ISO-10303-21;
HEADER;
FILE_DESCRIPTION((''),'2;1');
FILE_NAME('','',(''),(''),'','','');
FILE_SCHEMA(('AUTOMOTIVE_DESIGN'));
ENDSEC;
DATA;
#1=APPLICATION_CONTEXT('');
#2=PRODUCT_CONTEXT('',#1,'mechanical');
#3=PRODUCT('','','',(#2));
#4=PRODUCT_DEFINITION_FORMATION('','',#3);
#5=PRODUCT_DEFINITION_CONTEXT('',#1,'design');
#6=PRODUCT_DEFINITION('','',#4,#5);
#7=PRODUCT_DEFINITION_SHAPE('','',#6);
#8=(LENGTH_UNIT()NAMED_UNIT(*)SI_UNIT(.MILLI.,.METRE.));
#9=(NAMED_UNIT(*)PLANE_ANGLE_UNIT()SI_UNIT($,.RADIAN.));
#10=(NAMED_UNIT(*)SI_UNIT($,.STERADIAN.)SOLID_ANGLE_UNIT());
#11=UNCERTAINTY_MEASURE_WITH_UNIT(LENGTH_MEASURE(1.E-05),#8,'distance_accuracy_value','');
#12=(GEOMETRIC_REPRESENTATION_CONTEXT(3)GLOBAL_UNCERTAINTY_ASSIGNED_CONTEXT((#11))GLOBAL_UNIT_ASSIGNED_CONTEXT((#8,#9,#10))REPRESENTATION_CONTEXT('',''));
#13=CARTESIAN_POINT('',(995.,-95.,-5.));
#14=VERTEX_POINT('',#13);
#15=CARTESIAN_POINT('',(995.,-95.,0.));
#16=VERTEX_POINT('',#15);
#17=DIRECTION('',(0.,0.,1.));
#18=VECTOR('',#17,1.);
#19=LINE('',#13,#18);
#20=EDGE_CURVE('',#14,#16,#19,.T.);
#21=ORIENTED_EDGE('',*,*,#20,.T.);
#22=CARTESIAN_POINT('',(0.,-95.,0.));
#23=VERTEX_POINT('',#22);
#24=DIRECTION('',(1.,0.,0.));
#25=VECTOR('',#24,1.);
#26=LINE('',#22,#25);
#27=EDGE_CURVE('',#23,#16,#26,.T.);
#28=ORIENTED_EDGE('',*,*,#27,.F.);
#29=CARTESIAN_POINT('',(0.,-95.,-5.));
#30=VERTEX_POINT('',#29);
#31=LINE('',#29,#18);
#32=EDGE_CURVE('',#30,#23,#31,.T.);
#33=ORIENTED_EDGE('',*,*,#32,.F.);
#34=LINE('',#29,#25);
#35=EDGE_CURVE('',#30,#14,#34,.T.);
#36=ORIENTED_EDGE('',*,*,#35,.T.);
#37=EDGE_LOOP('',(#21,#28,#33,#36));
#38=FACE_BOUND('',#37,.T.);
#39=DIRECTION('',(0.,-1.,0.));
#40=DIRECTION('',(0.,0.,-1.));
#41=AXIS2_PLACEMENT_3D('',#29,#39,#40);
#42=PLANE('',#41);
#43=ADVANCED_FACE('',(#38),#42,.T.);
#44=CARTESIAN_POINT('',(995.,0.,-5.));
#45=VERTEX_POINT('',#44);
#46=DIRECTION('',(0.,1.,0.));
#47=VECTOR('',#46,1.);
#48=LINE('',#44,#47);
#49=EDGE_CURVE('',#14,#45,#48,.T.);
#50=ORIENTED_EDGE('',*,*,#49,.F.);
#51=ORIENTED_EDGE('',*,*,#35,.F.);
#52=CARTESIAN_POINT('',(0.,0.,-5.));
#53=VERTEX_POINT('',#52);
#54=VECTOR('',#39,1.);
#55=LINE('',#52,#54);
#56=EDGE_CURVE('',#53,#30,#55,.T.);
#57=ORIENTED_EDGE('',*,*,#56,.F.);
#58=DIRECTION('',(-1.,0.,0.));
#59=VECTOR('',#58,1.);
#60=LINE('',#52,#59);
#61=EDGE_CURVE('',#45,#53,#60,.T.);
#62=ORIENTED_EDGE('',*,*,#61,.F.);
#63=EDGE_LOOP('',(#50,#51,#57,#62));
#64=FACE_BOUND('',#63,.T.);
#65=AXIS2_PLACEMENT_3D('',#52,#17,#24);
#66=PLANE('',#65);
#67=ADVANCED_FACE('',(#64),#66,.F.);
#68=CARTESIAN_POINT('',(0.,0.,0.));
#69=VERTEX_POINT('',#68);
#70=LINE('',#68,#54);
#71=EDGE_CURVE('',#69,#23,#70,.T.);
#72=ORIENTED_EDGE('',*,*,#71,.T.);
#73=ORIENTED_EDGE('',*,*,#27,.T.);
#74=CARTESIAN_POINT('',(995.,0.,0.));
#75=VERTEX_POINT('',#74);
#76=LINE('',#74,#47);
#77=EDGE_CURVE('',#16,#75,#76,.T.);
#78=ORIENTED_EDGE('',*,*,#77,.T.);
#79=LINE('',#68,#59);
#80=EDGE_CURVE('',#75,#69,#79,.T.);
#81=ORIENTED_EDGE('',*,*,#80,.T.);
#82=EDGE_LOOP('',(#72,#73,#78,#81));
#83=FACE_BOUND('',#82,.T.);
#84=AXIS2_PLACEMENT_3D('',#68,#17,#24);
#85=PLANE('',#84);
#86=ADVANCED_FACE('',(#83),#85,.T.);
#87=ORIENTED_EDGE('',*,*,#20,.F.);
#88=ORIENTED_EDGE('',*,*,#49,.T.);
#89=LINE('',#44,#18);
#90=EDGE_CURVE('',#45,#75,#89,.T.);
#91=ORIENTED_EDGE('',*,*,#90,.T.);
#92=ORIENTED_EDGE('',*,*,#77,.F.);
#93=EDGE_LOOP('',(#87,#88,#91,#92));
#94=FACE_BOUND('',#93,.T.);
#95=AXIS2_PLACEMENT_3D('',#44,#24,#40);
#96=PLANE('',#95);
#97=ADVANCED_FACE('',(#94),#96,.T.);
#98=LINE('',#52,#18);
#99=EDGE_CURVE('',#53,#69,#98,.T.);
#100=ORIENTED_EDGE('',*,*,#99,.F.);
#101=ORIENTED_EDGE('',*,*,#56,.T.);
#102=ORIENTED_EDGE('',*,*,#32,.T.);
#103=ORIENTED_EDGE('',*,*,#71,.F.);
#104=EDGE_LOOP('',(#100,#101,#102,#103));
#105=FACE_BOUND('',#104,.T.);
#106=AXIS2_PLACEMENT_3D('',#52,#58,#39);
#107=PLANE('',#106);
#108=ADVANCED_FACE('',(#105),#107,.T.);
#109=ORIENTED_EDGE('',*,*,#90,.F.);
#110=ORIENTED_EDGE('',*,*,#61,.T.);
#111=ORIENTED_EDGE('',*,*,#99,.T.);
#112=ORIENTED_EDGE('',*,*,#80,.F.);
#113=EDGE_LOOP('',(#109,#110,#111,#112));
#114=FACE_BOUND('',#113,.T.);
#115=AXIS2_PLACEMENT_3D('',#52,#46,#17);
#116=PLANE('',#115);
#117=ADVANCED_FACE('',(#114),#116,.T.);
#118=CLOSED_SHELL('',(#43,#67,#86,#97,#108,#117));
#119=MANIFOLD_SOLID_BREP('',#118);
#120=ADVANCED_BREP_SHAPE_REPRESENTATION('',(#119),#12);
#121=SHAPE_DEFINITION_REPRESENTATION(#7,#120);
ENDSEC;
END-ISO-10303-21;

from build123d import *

# Parameters (mm, degrees)
IZIM1_W            = 995
IZIM1_H            = 95
TABAN_FLAN_1_DEPTH = 5


# Sheet-metal steps are written as plain solids
with BuildPart() as part:
    # Çizim1 → Taban-Flanş1 (new body)
    with BuildSketch(Plane.XY):
        with Locations((497.5, -47.5)):
            Rectangle(IZIM1_W, IZIM1_H)
    extrude(amount=-TABAN_FLAN_1_DEPTH)


solid = part.part
